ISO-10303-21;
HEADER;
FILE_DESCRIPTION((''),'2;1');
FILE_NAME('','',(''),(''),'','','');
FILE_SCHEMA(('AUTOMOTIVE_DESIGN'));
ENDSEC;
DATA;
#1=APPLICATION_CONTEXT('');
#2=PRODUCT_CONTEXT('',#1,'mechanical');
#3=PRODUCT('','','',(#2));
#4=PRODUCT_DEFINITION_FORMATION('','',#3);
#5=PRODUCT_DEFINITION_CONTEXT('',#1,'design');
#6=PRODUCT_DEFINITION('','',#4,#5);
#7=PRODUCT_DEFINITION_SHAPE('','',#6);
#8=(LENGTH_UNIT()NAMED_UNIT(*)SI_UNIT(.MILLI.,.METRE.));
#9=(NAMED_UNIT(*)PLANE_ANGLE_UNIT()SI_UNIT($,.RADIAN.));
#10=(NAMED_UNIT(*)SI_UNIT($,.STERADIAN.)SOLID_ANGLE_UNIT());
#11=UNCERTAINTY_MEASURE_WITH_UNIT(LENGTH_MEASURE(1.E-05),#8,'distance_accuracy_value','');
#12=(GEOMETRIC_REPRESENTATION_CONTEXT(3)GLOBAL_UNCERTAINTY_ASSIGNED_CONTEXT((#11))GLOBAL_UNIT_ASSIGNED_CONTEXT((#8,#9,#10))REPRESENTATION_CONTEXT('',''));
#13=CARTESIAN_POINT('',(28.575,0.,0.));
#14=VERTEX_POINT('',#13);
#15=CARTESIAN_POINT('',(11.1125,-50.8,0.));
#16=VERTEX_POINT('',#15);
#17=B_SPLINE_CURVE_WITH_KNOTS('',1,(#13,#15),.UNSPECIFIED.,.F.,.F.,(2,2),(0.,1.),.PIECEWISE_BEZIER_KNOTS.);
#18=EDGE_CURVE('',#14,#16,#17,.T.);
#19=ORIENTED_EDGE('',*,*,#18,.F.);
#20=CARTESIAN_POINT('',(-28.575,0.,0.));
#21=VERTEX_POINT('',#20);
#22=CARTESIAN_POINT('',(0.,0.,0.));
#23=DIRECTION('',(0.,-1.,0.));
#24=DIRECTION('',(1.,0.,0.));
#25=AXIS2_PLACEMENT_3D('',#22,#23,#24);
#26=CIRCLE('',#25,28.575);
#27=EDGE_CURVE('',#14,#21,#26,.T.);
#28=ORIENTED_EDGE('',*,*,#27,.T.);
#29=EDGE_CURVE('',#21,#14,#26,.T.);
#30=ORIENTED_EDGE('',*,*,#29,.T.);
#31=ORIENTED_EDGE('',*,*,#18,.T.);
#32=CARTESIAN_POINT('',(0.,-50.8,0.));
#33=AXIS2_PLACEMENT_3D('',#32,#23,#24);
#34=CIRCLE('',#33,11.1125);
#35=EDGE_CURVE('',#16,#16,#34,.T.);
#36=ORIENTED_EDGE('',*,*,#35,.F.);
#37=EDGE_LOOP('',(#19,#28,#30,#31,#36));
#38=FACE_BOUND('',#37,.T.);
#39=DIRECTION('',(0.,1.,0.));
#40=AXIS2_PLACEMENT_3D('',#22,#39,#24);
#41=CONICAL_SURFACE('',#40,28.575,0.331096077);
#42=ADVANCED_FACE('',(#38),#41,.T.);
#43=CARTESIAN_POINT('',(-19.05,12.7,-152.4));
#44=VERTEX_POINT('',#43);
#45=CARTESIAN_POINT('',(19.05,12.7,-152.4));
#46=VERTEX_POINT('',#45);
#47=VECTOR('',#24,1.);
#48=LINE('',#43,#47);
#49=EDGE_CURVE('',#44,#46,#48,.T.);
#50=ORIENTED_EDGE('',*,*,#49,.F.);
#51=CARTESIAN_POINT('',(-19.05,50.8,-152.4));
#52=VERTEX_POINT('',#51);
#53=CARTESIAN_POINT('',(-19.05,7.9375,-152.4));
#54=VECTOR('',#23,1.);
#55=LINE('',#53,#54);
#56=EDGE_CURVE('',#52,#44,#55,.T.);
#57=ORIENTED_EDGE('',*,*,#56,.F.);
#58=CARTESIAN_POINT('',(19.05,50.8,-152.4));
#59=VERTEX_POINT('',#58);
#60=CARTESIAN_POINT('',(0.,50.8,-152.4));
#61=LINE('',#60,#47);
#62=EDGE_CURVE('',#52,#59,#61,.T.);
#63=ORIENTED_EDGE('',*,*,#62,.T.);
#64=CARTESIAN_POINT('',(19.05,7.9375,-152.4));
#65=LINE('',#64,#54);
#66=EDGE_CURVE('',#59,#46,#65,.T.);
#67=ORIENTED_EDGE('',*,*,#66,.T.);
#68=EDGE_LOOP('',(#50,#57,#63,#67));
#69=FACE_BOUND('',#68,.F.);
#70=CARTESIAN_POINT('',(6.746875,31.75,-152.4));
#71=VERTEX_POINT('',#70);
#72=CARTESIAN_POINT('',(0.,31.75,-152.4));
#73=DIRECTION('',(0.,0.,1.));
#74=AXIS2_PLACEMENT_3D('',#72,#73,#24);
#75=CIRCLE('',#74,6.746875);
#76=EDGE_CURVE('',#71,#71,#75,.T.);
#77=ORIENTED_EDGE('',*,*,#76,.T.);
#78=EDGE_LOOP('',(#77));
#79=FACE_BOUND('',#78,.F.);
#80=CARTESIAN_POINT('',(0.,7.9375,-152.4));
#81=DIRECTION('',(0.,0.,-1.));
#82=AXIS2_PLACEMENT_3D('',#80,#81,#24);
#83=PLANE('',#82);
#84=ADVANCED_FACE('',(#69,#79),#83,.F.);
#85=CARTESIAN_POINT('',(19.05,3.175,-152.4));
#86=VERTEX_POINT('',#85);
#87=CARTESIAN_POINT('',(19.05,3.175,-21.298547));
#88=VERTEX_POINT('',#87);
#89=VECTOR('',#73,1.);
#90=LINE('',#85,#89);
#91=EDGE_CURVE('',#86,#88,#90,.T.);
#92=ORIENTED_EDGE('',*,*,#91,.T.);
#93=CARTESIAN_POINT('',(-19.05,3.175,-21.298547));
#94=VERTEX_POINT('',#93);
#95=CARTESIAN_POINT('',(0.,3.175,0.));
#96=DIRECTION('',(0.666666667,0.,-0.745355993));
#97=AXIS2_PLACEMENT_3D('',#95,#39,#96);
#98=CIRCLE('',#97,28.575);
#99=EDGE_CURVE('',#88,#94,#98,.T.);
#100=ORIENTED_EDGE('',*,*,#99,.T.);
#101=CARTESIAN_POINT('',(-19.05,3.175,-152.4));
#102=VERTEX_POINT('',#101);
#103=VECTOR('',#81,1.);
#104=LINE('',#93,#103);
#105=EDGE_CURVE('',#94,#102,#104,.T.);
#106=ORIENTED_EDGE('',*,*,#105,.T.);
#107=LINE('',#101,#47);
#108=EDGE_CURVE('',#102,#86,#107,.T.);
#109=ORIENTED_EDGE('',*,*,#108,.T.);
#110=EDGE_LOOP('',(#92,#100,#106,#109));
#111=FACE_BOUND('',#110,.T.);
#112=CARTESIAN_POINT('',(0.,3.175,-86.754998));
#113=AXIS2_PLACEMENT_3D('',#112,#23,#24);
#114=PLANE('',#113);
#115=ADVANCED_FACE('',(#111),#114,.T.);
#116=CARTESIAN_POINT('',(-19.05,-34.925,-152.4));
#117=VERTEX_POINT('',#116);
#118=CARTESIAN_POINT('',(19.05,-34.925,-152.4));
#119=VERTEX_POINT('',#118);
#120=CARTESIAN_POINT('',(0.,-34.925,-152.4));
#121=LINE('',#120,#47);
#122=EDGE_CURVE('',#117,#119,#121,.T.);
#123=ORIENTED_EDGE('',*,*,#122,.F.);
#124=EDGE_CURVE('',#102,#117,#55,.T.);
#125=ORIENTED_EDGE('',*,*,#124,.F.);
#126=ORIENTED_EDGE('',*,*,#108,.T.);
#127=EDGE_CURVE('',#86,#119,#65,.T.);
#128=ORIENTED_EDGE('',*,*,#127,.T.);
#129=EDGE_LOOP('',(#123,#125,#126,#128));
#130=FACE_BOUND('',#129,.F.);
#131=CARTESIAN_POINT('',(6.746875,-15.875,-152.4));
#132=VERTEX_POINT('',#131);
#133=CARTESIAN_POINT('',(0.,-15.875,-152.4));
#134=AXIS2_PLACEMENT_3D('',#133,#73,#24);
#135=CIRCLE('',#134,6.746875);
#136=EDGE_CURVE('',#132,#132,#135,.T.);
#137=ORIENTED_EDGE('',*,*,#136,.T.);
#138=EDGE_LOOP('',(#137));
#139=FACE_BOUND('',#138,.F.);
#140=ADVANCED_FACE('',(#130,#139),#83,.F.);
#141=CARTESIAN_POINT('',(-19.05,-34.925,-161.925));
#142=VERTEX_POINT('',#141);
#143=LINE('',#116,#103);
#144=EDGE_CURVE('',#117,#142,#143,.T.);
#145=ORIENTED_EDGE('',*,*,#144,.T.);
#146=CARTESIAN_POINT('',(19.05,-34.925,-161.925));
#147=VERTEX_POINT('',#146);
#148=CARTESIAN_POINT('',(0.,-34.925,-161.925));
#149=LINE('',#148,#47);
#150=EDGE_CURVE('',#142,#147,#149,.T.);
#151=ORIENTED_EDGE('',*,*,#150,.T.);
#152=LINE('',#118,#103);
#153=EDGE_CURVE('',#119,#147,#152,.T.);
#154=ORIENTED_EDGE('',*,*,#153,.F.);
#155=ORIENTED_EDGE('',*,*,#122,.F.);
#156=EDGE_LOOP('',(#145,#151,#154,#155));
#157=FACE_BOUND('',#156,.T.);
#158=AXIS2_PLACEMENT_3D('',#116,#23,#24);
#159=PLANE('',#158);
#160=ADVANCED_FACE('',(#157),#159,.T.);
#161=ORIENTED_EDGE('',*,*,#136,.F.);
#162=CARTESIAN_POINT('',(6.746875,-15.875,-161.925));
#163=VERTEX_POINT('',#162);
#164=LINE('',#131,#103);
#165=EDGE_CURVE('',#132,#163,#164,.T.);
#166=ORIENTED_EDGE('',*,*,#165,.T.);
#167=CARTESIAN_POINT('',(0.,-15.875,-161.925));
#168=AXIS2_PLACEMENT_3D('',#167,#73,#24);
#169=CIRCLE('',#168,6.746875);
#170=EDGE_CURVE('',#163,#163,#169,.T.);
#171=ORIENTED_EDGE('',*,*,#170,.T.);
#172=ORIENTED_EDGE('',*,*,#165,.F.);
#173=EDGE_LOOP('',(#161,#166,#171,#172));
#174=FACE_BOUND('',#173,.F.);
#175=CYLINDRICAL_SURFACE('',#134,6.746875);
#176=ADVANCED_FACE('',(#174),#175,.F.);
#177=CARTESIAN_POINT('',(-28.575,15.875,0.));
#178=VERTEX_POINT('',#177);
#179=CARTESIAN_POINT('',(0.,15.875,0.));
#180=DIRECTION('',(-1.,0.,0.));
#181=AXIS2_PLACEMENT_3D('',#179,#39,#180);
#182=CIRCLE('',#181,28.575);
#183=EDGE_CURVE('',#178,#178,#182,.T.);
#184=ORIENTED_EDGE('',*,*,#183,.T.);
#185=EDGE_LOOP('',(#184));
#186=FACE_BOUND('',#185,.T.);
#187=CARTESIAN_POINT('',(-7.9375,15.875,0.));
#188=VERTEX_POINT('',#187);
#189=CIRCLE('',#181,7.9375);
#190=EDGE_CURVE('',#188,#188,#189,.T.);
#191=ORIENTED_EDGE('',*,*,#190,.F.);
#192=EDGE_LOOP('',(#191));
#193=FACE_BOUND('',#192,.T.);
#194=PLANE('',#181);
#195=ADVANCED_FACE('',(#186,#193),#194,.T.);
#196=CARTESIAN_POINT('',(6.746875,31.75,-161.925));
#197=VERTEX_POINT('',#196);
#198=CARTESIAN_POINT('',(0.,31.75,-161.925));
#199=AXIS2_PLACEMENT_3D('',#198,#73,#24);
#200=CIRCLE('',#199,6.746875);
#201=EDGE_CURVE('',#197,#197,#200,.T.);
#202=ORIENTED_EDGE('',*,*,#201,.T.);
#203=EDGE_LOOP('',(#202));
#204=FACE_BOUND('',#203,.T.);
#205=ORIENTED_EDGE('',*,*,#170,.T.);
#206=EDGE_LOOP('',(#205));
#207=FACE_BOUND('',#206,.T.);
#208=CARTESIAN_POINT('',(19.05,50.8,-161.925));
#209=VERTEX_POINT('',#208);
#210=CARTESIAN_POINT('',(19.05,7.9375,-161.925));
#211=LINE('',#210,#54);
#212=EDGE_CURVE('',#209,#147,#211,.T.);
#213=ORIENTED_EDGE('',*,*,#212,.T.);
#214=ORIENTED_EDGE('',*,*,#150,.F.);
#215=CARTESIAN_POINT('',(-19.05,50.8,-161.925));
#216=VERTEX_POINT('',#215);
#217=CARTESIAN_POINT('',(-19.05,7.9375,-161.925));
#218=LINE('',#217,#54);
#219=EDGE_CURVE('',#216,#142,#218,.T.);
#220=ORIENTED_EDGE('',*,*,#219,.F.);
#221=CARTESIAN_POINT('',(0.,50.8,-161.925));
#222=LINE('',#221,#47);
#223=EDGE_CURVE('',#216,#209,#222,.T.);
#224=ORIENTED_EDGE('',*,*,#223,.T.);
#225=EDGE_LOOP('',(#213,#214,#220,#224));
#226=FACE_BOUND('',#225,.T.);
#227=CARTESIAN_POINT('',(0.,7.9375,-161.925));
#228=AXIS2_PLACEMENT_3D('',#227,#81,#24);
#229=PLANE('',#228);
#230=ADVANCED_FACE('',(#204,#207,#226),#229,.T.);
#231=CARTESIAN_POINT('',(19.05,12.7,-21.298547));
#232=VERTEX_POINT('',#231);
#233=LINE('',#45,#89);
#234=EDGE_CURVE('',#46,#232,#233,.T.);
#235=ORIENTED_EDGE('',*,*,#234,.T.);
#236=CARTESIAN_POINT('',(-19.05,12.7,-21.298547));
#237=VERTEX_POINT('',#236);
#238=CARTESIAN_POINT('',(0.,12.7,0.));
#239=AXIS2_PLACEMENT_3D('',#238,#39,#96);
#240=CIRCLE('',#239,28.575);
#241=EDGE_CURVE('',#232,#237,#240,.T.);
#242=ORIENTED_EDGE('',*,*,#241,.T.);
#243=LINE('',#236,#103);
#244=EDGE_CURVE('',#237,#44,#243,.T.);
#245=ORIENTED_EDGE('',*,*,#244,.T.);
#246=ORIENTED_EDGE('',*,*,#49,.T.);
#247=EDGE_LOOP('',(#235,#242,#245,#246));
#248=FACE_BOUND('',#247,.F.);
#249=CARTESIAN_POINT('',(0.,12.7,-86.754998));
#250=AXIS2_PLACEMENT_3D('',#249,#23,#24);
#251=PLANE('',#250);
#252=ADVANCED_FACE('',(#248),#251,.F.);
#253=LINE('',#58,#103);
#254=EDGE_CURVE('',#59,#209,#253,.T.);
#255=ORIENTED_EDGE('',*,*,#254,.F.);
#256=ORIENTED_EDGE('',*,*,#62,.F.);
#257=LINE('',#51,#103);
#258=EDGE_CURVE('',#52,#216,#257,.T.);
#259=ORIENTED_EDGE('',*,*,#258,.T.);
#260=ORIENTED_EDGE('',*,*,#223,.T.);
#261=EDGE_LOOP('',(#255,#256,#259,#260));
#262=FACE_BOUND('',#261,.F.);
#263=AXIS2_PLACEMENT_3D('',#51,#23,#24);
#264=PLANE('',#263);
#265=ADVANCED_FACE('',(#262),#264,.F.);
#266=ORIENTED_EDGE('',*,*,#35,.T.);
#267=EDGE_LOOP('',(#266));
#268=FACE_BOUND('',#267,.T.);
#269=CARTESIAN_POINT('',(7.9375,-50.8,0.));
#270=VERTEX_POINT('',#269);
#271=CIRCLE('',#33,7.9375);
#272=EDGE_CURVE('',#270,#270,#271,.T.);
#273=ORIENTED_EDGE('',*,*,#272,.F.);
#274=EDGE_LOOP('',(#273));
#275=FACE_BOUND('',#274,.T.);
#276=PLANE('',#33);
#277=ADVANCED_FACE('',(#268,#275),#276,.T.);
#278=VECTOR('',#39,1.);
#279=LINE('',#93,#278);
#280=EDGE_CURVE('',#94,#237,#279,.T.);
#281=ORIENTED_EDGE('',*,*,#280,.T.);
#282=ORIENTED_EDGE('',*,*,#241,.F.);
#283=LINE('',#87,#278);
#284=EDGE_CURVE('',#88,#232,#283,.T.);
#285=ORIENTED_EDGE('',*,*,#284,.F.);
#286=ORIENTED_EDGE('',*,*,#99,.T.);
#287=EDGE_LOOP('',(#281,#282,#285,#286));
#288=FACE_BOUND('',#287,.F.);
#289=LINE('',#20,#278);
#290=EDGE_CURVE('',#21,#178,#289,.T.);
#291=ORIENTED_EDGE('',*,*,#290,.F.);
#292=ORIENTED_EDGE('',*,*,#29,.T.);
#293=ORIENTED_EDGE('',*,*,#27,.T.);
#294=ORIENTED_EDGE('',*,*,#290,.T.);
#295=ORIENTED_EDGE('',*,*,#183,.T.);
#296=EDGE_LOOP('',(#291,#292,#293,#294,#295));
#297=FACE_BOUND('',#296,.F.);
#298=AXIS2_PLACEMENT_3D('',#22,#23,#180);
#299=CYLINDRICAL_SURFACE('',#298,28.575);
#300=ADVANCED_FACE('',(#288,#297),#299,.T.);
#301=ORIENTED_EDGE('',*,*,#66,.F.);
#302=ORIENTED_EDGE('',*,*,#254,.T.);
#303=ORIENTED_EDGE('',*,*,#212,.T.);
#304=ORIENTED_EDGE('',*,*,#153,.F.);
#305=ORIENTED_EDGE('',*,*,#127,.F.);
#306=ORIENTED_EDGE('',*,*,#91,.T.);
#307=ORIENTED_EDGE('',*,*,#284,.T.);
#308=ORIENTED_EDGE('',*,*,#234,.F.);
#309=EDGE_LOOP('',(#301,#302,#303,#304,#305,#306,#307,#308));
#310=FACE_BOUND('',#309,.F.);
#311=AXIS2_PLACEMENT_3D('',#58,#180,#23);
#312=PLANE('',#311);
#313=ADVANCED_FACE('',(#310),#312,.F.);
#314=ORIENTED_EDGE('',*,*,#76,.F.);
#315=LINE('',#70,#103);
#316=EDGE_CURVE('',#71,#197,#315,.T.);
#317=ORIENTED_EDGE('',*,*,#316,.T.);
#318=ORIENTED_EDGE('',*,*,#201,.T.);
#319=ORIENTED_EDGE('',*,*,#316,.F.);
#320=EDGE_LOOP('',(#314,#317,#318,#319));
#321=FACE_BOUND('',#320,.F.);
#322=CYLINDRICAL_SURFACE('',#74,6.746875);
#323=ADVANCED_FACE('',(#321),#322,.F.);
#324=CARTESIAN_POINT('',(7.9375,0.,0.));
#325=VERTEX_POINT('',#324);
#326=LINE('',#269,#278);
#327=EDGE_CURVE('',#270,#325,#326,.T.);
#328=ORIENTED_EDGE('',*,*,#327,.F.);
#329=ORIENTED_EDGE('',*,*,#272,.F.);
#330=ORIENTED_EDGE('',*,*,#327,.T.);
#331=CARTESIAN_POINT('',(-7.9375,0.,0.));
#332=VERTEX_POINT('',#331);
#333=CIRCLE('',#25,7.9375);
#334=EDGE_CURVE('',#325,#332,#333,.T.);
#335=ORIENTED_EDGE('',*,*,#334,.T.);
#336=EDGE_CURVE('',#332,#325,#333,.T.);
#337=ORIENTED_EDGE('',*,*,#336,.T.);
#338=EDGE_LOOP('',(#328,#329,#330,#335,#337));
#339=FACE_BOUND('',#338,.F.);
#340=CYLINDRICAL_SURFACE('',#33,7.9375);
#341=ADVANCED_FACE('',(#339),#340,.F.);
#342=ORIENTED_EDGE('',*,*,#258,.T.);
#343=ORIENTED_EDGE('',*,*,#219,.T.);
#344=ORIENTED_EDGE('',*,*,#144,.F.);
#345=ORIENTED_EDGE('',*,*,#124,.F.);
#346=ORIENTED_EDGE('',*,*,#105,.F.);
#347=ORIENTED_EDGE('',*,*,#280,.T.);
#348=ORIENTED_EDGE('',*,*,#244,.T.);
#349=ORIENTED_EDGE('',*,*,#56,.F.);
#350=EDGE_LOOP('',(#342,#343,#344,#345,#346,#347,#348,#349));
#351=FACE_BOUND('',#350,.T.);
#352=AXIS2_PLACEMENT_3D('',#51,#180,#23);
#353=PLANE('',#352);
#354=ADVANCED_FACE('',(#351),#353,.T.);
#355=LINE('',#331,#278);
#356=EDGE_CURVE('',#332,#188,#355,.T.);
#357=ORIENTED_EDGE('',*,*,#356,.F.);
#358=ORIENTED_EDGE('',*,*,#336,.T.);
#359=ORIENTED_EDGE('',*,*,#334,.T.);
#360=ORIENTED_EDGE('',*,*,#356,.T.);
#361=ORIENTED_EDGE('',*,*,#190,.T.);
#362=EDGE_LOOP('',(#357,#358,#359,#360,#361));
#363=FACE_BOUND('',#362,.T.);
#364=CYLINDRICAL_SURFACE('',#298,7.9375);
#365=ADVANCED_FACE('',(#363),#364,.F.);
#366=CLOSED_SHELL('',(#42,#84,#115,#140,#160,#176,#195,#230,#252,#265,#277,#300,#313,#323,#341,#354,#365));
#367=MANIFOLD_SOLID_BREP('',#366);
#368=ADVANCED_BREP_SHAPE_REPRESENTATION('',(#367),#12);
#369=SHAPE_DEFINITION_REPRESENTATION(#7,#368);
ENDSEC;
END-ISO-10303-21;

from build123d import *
from build123d import SkipClean  # not in build123d's __all__

# Parameters (mm, degrees)
F0_R      = 28.575
F2_R      = 11.1125
F4_R      = 7.9375
F5_DEPTH  = 50.8010001
F6_R      = 28.575
F6_R_2    = 7.9375
F7_DEPTH  = 15.875
F10_DEPTH = 9.525
F11_W     = 38.1
F11_H     = 85.725
F12_DEPTH = 9.525
F13_R     = 6.746875
F14_DEPTH = 9.526


# Not quite as in the source:
# - after a boolean that leaves OpenCascade's solid faulty, fix() repairs it


with BuildPart() as f3:
    # F0 (on Front) → F3 section 0
    with BuildSketch(Plane.XZ):
        Circle(F0_R)
    # F2 (on offset) → F3 section 1
    with BuildSketch(Plane.XZ.offset(50.8)):
        Circle(F2_R)
    loft()

    # F4 (on face) → F5 (cut, through all)
    with BuildSketch(Plane.XZ.offset(50.8)):
        Circle(F4_R)
    extrude(amount=-F5_DEPTH, mode=Mode.SUBTRACT)

    # F6 (on face) → F7 (join)
    with BuildSketch(Plane(origin=(0, 0, 0), x_dir=(-1, 0, 0), z_dir=(0, 1, 0))):
        Circle(F6_R)
        Circle(F6_R_2, mode=Mode.SUBTRACT)
    with SkipClean():  # cleaning this boolean's faces spoils the solid; the shape is the same uncleaned
        extrude(amount=F7_DEPTH)

    # F9 (on offset) → F10 (join)
    with BuildSketch(Plane.XZ.offset(-3.175)):
        with BuildLine():
            ThreePointArc((19.05, -21.2985474857), (0, -28.575), (-19.05, -21.2985474857))
            Line((-19.05, -21.2985474857), (-19.05, -152.4))
            Line((-19.05, -152.4), (19.05, -152.4))
            Line((19.05, -152.4), (19.05, -21.2985474857))
        make_face()
    extrude(amount=-F10_DEPTH)

    add(f3.part.fix(), mode=Mode.REPLACE)

    # F11 (on face) → F12 (join)
    with BuildSketch(Plane(origin=(0, 0, -152.4), x_dir=(1, 0, 0), z_dir=(0, 0, -1))):
        with Locations((0, -7.9375)):
            Rectangle(F11_W, F11_H)
    extrude(amount=F12_DEPTH)

    add(f3.part.fix(), mode=Mode.REPLACE)

    # F13 (on face) → F14 (cut, through all)
    with BuildSketch(Plane.XY.offset(-152.4)):
        with Locations((0, 31.75)):
            Circle(F13_R)
        with Locations((0, -15.875)):
            Circle(F13_R)
    extrude(amount=-F14_DEPTH, mode=Mode.SUBTRACT)


solid = f3.part
